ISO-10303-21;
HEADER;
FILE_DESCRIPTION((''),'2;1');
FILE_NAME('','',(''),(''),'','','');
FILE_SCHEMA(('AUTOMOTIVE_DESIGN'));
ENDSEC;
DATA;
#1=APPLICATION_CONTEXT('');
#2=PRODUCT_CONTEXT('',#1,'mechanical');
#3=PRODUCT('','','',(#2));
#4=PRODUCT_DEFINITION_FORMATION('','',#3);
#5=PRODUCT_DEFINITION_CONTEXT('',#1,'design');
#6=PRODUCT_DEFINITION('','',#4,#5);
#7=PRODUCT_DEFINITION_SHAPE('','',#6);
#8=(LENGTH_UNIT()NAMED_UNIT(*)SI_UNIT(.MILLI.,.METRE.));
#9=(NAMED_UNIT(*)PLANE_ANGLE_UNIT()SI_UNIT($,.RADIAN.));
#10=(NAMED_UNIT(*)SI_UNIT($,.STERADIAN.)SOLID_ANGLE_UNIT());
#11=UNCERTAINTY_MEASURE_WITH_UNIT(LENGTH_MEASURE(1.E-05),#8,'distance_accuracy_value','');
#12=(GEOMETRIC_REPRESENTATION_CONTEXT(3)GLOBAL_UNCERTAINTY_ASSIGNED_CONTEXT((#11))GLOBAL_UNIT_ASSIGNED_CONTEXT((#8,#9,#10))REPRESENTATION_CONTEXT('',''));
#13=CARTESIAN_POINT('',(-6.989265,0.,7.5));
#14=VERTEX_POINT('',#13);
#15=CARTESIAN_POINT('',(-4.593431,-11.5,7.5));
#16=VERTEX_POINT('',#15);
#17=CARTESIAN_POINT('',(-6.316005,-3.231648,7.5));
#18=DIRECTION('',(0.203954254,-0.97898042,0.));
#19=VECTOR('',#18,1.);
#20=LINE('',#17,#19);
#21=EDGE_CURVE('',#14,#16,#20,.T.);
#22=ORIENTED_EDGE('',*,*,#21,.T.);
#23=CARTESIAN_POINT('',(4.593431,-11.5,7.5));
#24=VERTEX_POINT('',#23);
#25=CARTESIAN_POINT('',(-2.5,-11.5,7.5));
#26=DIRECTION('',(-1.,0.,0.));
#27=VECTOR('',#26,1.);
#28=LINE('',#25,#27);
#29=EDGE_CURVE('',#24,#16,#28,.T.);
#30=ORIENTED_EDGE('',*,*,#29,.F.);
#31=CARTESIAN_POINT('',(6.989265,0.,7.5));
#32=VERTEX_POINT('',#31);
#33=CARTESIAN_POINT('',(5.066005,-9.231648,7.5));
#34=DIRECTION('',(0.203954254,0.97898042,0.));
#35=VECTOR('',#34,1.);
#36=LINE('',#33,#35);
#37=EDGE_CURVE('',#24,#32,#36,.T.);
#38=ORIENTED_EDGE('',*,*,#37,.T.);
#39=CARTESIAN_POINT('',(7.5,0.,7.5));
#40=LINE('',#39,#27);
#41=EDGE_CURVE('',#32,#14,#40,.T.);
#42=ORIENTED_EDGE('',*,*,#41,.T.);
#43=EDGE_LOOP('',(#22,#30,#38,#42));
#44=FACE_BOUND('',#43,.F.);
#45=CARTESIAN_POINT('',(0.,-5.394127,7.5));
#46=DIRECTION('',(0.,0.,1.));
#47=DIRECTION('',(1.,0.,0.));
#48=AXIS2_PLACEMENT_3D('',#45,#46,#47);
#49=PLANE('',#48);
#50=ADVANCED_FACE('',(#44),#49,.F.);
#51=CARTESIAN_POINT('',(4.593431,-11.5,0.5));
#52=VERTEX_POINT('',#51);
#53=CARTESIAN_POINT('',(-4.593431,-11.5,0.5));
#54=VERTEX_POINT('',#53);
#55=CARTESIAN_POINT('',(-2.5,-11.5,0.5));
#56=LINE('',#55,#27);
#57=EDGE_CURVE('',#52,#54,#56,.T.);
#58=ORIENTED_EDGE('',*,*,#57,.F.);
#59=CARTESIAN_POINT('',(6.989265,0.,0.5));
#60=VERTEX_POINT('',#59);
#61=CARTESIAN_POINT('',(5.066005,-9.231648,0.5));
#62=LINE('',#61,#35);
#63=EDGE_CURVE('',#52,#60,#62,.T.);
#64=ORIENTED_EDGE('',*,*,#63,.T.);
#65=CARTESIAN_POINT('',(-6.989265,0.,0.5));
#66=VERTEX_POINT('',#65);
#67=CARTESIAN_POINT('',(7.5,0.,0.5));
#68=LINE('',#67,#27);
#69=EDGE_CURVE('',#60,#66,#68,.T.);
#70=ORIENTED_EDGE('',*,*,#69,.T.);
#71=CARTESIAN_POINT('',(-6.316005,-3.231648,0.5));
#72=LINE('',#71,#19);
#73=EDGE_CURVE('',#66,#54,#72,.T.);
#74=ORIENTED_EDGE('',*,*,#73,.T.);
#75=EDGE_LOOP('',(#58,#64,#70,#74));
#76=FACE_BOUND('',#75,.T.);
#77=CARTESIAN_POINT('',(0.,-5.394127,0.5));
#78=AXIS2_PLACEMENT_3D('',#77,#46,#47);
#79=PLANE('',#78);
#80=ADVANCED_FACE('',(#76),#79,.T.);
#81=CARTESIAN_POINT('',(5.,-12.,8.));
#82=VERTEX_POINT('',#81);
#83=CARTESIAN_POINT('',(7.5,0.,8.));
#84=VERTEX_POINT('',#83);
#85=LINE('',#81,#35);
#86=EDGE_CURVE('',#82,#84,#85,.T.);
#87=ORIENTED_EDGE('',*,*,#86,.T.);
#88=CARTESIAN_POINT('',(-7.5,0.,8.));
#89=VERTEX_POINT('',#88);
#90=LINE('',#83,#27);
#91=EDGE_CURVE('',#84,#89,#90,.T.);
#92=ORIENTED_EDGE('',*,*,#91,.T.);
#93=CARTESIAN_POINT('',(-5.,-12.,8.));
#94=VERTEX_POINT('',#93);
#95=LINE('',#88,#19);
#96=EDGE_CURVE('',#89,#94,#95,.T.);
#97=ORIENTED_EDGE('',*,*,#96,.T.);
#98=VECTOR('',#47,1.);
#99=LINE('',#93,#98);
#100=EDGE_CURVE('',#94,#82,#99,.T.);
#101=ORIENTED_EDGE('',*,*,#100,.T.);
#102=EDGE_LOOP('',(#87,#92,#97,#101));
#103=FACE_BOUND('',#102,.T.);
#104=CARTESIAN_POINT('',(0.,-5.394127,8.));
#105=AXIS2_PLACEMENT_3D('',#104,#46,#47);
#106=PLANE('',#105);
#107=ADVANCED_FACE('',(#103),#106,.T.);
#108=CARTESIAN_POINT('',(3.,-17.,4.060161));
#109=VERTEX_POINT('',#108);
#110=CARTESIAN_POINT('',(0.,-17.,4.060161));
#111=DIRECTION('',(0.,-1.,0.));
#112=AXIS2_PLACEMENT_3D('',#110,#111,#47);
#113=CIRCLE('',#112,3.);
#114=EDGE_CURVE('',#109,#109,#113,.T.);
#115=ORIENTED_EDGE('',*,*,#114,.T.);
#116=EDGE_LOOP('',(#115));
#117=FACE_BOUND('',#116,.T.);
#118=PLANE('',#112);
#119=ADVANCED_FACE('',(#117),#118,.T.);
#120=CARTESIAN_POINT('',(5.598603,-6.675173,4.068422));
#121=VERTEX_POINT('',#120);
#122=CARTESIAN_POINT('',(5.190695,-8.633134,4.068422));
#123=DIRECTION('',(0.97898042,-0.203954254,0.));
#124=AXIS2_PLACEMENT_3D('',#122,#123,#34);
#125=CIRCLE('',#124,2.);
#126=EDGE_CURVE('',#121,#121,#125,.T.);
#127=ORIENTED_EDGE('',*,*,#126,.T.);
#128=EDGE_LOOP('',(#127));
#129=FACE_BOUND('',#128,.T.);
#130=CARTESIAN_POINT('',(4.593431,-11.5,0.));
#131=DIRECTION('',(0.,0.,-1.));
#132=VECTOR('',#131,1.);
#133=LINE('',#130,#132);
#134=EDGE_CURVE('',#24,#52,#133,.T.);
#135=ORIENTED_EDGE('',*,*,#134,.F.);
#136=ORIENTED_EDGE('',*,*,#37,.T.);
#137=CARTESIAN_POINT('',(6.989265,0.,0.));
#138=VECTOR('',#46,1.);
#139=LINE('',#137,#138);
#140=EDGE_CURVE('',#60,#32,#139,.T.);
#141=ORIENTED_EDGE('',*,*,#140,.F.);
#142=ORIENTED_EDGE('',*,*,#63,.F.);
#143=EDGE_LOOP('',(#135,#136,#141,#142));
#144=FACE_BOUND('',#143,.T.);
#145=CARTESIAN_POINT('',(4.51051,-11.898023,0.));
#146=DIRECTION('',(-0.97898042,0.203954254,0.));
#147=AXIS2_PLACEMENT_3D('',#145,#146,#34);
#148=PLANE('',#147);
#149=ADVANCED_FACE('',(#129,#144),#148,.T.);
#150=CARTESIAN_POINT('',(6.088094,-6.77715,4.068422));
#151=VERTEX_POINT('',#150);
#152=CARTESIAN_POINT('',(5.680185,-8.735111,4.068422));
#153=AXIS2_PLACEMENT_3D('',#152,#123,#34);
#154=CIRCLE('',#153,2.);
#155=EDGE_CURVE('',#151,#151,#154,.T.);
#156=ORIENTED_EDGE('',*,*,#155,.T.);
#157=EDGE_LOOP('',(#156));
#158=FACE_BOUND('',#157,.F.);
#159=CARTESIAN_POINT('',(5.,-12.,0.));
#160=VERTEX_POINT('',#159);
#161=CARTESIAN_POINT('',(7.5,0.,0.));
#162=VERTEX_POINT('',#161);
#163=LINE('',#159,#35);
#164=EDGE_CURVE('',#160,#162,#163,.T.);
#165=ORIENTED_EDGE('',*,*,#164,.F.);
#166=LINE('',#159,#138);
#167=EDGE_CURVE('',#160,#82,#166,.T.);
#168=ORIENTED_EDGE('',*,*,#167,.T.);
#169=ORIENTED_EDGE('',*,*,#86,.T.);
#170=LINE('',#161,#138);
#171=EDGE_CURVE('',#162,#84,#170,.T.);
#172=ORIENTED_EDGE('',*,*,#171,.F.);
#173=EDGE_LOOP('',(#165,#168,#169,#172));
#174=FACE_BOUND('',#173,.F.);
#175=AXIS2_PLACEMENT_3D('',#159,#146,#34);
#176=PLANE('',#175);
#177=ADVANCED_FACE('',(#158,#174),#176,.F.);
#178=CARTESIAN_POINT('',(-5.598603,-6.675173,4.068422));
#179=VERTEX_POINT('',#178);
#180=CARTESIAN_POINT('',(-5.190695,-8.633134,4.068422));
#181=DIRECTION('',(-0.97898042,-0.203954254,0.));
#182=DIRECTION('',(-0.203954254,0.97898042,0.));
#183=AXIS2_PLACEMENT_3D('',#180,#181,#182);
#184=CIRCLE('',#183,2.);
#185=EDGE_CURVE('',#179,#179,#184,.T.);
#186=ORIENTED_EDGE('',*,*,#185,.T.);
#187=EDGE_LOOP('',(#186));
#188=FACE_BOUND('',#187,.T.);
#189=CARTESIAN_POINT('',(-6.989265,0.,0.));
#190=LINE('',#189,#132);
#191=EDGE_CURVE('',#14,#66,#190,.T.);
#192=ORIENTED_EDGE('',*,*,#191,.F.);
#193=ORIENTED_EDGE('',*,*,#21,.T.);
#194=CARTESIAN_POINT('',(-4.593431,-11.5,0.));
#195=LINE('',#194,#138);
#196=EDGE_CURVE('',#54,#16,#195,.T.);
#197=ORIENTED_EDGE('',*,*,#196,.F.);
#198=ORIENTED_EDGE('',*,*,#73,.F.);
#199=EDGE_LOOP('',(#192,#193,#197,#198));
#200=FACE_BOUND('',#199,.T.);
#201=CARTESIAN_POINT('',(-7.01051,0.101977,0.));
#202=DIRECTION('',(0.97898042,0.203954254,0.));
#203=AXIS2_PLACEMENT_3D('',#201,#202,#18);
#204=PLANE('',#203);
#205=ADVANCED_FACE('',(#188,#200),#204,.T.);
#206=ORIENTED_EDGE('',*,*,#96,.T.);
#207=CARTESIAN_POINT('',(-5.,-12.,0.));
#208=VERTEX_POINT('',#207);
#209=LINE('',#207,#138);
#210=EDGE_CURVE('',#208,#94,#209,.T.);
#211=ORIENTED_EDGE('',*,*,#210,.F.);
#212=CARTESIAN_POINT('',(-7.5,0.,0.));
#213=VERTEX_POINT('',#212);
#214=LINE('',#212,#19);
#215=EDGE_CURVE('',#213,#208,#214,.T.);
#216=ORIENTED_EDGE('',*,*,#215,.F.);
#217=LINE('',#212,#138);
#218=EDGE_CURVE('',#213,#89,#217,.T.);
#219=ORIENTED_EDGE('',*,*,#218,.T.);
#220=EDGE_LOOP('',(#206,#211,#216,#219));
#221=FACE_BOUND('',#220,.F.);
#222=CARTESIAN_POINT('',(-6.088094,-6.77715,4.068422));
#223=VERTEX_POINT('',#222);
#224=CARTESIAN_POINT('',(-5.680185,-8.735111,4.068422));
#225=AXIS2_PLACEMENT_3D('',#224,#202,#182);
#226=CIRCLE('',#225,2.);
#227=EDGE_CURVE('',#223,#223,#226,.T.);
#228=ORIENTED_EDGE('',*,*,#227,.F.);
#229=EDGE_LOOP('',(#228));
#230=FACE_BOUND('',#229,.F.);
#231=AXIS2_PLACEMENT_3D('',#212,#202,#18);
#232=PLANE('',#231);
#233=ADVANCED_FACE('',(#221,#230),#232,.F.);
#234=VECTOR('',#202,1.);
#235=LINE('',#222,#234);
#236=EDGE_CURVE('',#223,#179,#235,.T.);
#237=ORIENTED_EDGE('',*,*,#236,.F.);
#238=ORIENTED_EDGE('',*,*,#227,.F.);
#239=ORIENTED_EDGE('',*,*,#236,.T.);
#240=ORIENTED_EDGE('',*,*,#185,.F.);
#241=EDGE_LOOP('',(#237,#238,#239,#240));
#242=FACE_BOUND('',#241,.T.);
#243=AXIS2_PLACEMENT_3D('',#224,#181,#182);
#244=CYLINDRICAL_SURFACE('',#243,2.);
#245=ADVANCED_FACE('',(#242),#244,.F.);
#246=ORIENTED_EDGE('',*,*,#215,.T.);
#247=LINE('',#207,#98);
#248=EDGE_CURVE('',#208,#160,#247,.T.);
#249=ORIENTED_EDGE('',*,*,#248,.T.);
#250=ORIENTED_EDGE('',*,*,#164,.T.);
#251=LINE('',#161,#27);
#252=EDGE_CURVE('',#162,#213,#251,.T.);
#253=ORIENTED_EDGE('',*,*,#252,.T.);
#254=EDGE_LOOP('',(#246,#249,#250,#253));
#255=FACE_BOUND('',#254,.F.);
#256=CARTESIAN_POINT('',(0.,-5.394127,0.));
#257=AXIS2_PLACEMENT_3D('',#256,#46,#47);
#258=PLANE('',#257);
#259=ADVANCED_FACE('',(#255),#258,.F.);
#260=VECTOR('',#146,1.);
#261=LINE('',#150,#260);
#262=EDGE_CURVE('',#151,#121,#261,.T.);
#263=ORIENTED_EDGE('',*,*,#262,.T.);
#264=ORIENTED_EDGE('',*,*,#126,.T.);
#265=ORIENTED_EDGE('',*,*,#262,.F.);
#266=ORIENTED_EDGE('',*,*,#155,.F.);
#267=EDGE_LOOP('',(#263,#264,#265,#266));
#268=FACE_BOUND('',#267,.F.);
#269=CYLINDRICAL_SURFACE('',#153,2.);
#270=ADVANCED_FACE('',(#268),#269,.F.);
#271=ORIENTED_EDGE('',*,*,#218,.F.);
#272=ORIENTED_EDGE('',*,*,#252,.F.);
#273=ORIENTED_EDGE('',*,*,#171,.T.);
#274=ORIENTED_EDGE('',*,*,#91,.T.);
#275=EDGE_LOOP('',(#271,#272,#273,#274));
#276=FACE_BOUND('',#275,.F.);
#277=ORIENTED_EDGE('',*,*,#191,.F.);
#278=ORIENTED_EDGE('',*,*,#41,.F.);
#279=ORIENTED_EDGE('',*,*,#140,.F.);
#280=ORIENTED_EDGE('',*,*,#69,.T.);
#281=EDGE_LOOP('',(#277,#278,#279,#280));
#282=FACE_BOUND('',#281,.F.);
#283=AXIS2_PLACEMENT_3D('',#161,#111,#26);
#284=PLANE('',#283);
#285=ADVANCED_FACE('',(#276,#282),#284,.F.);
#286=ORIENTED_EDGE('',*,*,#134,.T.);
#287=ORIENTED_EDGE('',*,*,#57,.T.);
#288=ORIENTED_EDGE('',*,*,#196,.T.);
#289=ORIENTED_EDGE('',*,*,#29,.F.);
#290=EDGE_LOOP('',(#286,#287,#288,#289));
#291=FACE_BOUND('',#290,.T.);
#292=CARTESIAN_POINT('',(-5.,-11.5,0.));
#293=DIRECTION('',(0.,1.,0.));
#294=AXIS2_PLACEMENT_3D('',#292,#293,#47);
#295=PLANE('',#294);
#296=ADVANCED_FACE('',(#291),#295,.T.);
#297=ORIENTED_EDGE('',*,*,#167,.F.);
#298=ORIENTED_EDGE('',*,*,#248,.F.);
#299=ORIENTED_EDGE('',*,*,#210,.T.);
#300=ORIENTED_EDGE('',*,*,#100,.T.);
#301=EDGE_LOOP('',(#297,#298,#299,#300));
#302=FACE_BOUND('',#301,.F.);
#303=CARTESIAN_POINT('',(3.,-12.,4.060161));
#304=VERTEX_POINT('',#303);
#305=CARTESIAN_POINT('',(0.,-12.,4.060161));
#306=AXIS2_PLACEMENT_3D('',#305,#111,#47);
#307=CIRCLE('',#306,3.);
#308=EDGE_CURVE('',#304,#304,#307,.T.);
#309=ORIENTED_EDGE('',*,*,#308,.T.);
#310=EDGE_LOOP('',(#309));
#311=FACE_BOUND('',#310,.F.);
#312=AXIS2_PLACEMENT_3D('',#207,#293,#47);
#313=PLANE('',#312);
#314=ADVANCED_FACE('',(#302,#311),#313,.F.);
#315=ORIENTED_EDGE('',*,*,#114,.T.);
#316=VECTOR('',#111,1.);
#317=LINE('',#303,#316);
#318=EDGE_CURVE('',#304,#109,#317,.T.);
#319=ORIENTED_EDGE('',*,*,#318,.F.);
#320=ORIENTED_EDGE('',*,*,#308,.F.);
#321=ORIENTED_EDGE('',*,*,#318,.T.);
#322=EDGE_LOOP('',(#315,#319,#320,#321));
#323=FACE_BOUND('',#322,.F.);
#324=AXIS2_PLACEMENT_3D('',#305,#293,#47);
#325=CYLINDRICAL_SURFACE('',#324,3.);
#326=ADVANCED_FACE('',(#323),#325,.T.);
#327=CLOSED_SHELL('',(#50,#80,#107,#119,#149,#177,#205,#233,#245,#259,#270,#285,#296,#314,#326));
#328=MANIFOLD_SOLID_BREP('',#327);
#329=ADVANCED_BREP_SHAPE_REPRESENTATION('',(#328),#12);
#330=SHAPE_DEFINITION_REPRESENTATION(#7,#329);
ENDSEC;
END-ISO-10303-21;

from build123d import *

# Parameters (mm, degrees)
F1_DEPTH = 8
F2_T     = -0.5
F3_R     = 3
F4_DEPTH = 5
F5_R     = 2
F6_DEPTH = 5


# Not quite as in the source:
# - a pattern or mirror of a feature is missing from the dataset's text; its kind, count and spacing are read off the source's solid


with BuildPart() as f1:
    # F0 (on Top) → F1 (new body)
    with BuildSketch(Plane.XY):
        Polygon((-7.5, 0), (-5, -12), (5, -12), (7.5, 0), align=None)
    extrude(amount=F1_DEPTH)

    # F2
    f2_openings = [f1.faces().sort_by_distance(p)[0] for p in [
        (0, 0, 4),
    ]]
    offset(amount=F2_T, openings=f2_openings)

    # F3 (on face) → F4 (join)
    with BuildSketch(Plane.XZ.offset(12)):
        with Locations((0, 4.0601608343)):
            Circle(F3_R)
    extrude(amount=F4_DEPTH)

    # F5 (on face) → F6 (cut)
    with BuildSketch(Plane(origin=(7.1880199667, -1.4975041597, 0), x_dir=(0.2039542541, 0.9789804197, 0), z_dir=(0.9789804197, -0.2039542541, 0))):
        with Locations((-7.3930048384, 4.0684221312)):
            Circle(F5_R)
    f6 = extrude(amount=-F6_DEPTH, mode=Mode.SUBTRACT)

    # F6_copies: F6 across plane
    add(f6.mirror(Plane(origin=(0, 0, 0), x_dir=(0, 0, -1), z_dir=(-1, 0, 0))), mode=Mode.SUBTRACT)


solid = f1.part
